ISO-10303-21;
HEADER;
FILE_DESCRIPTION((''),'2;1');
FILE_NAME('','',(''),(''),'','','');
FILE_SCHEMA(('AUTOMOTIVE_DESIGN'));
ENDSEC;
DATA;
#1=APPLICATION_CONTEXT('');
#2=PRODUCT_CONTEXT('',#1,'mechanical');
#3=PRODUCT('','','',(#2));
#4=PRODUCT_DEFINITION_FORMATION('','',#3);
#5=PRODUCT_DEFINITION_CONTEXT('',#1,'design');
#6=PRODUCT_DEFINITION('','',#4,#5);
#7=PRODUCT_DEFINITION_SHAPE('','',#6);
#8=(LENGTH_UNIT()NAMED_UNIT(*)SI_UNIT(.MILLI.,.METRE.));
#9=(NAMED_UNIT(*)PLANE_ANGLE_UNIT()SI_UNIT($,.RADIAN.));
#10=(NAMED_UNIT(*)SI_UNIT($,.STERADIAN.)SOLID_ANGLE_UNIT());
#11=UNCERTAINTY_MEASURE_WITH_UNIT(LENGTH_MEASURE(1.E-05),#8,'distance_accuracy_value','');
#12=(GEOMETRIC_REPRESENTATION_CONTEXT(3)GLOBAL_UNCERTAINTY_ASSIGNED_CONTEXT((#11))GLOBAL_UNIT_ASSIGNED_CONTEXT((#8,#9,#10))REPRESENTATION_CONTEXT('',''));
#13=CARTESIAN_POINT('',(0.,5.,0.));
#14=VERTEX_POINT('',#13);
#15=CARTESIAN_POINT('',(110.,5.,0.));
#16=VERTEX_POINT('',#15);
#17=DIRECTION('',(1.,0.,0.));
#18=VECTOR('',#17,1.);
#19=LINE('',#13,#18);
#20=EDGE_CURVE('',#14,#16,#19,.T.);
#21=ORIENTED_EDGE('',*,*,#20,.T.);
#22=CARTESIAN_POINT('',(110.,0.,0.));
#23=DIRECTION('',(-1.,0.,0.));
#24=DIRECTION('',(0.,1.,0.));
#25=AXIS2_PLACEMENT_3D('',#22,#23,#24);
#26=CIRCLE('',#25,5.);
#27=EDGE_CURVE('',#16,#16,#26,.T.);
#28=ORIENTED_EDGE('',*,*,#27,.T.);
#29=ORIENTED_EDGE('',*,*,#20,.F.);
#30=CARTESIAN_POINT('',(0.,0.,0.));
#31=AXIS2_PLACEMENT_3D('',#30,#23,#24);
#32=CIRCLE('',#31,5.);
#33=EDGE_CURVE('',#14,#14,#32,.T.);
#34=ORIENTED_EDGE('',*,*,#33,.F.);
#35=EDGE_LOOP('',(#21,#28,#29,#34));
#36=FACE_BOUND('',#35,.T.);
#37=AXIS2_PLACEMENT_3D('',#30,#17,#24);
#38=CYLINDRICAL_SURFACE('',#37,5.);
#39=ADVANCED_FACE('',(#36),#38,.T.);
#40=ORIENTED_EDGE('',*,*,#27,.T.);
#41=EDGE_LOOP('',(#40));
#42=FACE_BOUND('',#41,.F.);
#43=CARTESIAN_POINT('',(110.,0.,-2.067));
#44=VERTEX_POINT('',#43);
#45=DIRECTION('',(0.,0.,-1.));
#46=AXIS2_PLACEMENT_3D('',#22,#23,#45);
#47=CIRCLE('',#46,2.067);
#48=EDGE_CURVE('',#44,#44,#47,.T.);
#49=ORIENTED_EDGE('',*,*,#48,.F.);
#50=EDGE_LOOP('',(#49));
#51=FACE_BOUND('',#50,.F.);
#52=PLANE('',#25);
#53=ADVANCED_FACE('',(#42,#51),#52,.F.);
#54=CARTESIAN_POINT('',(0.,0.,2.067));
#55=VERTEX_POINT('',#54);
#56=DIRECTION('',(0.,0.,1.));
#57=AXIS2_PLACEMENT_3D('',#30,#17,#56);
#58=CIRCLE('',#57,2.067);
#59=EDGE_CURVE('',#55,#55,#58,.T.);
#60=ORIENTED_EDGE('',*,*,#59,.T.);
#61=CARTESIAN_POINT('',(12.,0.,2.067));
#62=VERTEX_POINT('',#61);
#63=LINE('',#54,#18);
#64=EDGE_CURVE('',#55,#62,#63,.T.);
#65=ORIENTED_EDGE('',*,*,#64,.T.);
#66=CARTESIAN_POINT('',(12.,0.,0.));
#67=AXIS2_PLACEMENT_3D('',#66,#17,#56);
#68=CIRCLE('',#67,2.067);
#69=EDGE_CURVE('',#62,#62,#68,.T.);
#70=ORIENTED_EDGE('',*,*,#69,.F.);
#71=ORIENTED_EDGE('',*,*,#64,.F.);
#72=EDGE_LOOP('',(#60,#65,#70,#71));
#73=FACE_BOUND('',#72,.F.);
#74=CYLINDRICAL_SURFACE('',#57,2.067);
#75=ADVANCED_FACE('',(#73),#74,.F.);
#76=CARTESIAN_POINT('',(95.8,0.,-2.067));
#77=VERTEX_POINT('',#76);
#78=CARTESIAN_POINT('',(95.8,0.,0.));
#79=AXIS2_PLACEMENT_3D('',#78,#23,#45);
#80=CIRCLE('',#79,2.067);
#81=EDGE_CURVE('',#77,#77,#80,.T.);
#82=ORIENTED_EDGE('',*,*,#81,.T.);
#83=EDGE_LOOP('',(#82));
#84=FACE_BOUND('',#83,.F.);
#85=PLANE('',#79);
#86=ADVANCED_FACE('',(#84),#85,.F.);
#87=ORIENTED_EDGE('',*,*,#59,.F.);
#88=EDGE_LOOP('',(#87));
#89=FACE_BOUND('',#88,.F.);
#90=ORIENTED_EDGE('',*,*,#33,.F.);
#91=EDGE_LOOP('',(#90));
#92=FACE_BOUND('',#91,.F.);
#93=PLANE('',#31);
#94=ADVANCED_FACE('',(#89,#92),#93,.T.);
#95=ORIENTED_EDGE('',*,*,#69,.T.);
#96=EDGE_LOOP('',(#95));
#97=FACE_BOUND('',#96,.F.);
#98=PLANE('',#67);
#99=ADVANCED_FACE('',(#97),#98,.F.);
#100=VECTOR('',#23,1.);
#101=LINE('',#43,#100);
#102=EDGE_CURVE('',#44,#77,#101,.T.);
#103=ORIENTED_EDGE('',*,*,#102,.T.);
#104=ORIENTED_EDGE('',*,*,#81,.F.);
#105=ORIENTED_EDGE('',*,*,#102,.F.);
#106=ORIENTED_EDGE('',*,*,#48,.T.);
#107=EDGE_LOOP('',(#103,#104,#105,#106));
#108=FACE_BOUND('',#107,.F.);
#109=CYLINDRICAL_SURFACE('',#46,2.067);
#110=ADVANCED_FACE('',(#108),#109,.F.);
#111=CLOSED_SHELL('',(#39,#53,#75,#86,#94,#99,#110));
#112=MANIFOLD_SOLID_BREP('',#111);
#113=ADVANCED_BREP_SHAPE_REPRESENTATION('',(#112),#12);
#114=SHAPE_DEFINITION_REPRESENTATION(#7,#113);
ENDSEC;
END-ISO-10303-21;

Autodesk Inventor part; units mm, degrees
ref_plane "YZ Plane" through (0, 0, 0) normal (1, 0, 0) x (0, 1, 0)
ref_plane "XZ Plane" through (0, 0, 0) normal (0, 1, 0) x (-1, 0, 0)
ref_plane "XY Plane" through (0, 0, 0) normal (0, 0, 1) x (1, 0, 0)
sketch "Sketch1" plane through (0, 0, 0) normal (0, 0, 1) x (1, 0, 0)
  line L0 (0, 0) -> (0, 5)
  line L1 (0, 5) -> (110, 5)
  line L2 (110, 5) -> (110, 0)
  line L3 (110, 0) -> (0, 0)
  dimension "d0" = 110
  dimension "d1" = 10
revolve "Revolution1" add sketch "Sketch1" angle 360 about axis through (110, 0, 0) along (-1, 0, 0)
sketch "Sketch2" plane through (110, 0, 0) normal (1, 0, 0) x (0, 0, -1)
  circle A0 centre (0, 0) radius 5 projected
hole "Hole1" at (110, 0, 0) direction (-1, 0, 0) diameter 4.134 depth 14.2 thread size "M5x0.8" class "6H" standard "ISO Metric profile"
sketch "Sketch3" plane through (0, 0, 0) normal (-1, 0, 0) x (0, 0, 1)
  circle A0 centre (0, 0) radius 5 projected
hole "Hole2" at (0, 0, 0) direction (1, 0, 0) diameter 4.134 depth 12 thread size "M5x0.8" class "6H" standard "ISO Metric profile"
properties part number "1 part 21"
